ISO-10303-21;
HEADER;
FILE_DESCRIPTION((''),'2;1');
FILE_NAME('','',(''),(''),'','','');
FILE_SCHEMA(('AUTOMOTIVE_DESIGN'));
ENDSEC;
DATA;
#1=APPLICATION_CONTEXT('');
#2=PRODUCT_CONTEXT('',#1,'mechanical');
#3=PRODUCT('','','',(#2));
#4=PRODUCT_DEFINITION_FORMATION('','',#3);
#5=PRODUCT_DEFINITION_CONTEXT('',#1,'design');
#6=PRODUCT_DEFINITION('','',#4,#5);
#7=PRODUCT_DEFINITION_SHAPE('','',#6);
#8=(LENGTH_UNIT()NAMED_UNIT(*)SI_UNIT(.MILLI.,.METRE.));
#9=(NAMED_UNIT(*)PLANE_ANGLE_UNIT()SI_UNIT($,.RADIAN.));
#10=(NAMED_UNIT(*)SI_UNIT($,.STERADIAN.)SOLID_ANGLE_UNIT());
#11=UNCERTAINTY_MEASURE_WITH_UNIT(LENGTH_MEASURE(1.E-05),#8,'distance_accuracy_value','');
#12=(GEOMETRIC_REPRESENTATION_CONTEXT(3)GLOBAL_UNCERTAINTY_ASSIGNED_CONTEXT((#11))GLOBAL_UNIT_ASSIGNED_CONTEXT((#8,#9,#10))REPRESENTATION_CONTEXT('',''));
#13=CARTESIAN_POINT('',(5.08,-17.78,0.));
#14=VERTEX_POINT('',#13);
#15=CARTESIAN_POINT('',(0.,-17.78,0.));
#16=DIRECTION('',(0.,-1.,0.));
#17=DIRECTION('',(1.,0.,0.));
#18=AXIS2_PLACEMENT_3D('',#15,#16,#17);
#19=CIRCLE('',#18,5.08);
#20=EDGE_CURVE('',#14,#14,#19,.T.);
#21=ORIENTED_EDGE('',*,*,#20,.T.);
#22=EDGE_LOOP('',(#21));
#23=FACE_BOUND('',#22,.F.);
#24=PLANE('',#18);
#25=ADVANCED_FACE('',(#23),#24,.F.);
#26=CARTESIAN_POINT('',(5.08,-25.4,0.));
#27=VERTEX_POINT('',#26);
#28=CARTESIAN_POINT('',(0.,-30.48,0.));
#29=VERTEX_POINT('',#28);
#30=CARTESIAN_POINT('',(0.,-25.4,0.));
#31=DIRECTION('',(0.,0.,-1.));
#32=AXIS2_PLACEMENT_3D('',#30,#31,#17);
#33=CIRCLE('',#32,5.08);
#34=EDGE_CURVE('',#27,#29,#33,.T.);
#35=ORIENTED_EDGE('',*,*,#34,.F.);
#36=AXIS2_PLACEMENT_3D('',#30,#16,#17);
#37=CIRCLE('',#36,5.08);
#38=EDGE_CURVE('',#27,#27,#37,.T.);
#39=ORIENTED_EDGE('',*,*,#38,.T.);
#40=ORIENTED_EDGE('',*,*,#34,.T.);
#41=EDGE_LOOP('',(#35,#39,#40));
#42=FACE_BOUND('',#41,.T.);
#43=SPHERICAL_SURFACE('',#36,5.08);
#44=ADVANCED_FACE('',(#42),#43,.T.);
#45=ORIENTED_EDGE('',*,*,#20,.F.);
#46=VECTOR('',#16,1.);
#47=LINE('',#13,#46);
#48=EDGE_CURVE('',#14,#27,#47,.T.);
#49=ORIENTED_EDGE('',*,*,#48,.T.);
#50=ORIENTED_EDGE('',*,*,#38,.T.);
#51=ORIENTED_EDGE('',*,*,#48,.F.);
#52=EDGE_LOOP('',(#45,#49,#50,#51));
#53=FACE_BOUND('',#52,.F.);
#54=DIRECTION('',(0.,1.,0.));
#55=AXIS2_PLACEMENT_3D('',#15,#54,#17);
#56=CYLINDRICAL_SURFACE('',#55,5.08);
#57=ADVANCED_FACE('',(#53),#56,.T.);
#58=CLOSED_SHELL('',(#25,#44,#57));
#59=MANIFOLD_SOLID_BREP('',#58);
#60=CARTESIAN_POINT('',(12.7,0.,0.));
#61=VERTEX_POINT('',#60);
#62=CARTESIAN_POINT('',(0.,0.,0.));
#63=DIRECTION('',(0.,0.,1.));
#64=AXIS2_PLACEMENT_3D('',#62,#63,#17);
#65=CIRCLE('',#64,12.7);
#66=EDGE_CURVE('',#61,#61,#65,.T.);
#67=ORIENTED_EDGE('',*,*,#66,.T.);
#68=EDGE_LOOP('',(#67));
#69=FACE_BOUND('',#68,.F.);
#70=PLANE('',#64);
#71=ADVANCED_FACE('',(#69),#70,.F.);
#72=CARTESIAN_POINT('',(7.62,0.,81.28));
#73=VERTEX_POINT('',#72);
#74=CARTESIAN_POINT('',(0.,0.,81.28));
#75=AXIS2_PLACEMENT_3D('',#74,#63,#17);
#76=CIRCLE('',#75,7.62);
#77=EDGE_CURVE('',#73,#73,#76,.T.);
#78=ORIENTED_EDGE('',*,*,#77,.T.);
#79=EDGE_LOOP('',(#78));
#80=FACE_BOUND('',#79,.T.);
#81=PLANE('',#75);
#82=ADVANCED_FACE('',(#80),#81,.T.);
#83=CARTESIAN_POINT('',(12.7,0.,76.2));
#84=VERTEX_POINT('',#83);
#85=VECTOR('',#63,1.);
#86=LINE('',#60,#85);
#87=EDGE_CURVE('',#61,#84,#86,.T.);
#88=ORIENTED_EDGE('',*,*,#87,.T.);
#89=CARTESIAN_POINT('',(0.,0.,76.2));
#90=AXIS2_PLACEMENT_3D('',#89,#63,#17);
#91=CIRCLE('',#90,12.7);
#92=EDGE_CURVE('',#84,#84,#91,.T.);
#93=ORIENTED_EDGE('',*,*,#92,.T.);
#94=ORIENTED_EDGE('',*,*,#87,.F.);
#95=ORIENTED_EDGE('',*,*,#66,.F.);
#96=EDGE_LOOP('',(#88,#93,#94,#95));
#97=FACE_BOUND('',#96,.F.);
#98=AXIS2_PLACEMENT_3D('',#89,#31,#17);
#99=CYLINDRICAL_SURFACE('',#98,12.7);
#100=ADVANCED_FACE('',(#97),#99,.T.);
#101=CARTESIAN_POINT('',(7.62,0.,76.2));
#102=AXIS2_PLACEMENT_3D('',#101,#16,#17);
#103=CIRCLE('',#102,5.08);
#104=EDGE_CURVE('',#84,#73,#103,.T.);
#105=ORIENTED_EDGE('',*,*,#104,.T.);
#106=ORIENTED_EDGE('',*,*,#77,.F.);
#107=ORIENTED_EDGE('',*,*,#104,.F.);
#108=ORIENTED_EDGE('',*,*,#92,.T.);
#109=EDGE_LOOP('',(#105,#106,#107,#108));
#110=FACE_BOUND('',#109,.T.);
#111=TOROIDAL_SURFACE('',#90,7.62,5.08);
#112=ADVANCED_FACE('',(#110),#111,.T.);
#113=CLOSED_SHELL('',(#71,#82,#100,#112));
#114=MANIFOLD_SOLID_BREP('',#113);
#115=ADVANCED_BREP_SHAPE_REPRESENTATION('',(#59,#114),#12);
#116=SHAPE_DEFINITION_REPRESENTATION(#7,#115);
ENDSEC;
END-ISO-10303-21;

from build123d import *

# Parameters (mm, degrees)
F0_R      = 12.7
F1_DEPTH  = 76.2
F2_DEPTH  = 5.08
F3_R      = 5.08
F9_R      = 5.08
F10_DEPTH = 12.7
F11_R     = 5.08


with BuildPart() as f1:
    # F0 (on Top) → F1 (new body)
    with BuildSketch(Plane.XY):
        Circle(F0_R)
    extrude(amount=F1_DEPTH)

    # F2 (add): a face of the model
    f2_faces = [f1.faces().sort_by_distance(p)[0] for p in [
        (0, 0, 76.2),
    ]]
    extrude(f2_faces, amount=F2_DEPTH)

    # F3
    f3_edges = [f1.edges().sort_by_distance(p)[0] for p in [
        (-12.7, 0, 81.28),
    ]]
    fillet(f3_edges, radius=F3_R)


with BuildPart() as f10:
    # F9 (on plane+point) → F10 (new body)
    with BuildSketch(Plane.XZ.offset(17.78)):
        Circle(F9_R)
    extrude(amount=F10_DEPTH)

    # F11
    f11_edges = [f10.edges().sort_by_distance(p)[0] for p in [
        (-5.08, -30.48, 0),
    ]]
    fillet(f11_edges, radius=F11_R)


solid = Compound([f1.part, f10.part])
